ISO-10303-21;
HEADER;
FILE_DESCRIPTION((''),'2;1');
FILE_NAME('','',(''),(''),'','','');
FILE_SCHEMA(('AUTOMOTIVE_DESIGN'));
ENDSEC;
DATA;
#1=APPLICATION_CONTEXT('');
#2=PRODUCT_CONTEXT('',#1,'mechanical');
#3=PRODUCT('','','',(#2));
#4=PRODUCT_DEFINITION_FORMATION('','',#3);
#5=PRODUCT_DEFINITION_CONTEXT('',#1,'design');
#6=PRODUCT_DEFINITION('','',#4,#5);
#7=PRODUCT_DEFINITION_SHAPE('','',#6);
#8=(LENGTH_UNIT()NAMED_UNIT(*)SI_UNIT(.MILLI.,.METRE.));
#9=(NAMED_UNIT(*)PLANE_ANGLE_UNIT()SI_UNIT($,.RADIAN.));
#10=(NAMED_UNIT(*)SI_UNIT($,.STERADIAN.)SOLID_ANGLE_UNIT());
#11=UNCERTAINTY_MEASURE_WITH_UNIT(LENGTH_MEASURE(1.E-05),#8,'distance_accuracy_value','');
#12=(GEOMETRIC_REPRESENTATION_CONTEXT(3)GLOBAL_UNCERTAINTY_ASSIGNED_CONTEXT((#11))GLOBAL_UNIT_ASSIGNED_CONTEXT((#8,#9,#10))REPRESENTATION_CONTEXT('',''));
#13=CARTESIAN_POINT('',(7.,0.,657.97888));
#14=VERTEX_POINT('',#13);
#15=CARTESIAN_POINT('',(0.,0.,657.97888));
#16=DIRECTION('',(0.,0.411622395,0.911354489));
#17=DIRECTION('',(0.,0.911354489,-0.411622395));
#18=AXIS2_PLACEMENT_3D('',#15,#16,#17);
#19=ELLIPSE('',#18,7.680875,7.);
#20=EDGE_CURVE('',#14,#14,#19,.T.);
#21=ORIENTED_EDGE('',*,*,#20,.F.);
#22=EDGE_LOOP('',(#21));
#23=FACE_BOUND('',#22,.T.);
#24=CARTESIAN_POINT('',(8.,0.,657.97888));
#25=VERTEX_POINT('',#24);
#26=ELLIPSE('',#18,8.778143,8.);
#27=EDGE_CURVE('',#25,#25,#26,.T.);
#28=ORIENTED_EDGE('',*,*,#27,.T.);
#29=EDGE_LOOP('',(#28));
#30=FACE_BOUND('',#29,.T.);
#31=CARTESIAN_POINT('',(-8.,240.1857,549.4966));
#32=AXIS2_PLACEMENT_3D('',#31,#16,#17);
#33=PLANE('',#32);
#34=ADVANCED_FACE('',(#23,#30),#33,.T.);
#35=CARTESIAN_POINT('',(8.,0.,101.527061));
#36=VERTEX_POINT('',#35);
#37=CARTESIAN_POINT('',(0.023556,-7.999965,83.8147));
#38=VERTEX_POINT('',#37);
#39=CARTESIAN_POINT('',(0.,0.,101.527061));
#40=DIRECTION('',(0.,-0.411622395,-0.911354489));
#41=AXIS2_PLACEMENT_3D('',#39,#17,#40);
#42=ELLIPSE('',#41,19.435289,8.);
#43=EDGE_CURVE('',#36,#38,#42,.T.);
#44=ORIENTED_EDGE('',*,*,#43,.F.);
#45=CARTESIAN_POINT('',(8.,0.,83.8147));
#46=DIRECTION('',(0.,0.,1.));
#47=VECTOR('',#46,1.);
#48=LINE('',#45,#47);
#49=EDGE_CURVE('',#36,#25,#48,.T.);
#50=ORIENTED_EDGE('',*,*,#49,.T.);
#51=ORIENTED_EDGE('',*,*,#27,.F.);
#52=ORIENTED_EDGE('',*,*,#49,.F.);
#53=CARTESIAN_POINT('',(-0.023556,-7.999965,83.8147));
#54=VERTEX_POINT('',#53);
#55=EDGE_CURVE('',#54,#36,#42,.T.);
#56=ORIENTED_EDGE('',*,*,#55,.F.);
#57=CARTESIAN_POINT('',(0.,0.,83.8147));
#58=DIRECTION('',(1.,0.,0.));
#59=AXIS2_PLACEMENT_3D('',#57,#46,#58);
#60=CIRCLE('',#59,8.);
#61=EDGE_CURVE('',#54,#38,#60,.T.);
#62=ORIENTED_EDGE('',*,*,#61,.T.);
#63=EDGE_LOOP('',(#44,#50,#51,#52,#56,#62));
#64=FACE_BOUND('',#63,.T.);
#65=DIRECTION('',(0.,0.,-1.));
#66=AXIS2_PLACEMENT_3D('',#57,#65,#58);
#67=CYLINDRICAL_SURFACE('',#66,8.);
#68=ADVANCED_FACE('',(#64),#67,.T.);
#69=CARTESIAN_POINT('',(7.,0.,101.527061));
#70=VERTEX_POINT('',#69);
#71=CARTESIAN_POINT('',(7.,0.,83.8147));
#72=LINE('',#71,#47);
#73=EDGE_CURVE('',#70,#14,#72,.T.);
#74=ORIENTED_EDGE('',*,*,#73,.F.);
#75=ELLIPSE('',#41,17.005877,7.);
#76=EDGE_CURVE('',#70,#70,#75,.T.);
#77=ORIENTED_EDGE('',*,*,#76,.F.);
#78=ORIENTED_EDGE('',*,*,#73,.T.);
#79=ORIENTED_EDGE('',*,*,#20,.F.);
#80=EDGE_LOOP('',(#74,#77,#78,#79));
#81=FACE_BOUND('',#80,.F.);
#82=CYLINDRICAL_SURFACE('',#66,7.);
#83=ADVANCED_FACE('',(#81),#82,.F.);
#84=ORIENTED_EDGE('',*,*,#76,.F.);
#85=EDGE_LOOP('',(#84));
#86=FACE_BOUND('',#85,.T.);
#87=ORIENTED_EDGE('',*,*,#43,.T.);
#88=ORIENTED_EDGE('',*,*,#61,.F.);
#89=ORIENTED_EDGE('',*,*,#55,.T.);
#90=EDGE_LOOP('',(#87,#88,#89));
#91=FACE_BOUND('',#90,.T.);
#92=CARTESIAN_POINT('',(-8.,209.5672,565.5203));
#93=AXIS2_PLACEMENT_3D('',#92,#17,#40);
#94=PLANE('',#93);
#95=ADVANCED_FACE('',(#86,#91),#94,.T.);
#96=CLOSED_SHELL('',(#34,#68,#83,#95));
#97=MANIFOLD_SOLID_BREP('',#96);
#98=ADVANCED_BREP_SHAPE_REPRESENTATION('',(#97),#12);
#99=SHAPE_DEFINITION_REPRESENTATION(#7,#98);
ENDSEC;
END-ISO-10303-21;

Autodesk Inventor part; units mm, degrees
ref_plane "Начальная плоскость" through (0, 0, 83.8147) normal (0, 0, 1) x (1, 0, 0)
ref_plane "Конечная плоскость" through (0, 0, 661.5922) normal (0, 0, 1) x (1, 0, 0)
sketch "Эскиз" plane through (0, 0, 0) normal (0, 0, 1) x (1, 0, 0)
  circle A0 centre (0, 0) radius 7
  circle A1 centre (0, 0) radius 8
  dimension "d0" = 16
  dimension "d1" = 1
extrude "Тело" add sketch "Эскиз" along normal up to surface (577.7775 mm away) from surface at 83.8147
sketch "Sketch3" plane through (0, 0, 0) normal (0, 0, 1) x (1, 0, 0)
  line L0 (0, 0) -> (10, 0)
ref_plane "Work Plane3" through (0, 0, 0) normal (0, -1, 0) x (1, 0, 0)
sketch "Sketch4" plane through (0, 0, 0) normal (0, -1, 0) x (1, 0, 0)
  line L0 (-2, 83.8147) -> (12, 83.8147)
  line L1 (-2, 661.5922) -> (12, 661.5922)
  dimension "d7" = 577.7775
ref_plane "РабПлоскость4" through (-8, 240.1857, 549.4966) normal (0, 0.4116224, 0.9113545) x (1, 0, 0)
split "Разделение1" plane through (-8, 240.1857, 549.4966) removes the side toward (0, 0.4116224, 0.9113545)
ref_plane "РабПлоскость5" through (-8, 209.5672, 565.5203) normal (0, 0.9113545, -0.4116224) x (1, 0, 0)
split "Разделение2" plane through (-8, 209.5672, 565.5203) removes the side toward (0, 0.9113545, -0.4116224)
equation "\"d0\" = G_H"
equation "\"d1\" = G_T"
equation "\"d2\" = G_L"
equation "\"G_H\" = 16"
equation "\"G_T\" = 1"
equation "\"G_L\" = d7"
equation "\"G_OFFSET_START\" = -83.81468"
equation "\"G_OFFSET_END\" = -2.19454"
equation "\"d4\" = -G_OFFSET_START"
equation "\"d5\" = G_OFFSET_END + B_L"
equation "\"B_L\" = 663.78672"
properties part number "Труба 16x1-577,78 ГОСТ 10704-91" material "Сталь, мягкая"
